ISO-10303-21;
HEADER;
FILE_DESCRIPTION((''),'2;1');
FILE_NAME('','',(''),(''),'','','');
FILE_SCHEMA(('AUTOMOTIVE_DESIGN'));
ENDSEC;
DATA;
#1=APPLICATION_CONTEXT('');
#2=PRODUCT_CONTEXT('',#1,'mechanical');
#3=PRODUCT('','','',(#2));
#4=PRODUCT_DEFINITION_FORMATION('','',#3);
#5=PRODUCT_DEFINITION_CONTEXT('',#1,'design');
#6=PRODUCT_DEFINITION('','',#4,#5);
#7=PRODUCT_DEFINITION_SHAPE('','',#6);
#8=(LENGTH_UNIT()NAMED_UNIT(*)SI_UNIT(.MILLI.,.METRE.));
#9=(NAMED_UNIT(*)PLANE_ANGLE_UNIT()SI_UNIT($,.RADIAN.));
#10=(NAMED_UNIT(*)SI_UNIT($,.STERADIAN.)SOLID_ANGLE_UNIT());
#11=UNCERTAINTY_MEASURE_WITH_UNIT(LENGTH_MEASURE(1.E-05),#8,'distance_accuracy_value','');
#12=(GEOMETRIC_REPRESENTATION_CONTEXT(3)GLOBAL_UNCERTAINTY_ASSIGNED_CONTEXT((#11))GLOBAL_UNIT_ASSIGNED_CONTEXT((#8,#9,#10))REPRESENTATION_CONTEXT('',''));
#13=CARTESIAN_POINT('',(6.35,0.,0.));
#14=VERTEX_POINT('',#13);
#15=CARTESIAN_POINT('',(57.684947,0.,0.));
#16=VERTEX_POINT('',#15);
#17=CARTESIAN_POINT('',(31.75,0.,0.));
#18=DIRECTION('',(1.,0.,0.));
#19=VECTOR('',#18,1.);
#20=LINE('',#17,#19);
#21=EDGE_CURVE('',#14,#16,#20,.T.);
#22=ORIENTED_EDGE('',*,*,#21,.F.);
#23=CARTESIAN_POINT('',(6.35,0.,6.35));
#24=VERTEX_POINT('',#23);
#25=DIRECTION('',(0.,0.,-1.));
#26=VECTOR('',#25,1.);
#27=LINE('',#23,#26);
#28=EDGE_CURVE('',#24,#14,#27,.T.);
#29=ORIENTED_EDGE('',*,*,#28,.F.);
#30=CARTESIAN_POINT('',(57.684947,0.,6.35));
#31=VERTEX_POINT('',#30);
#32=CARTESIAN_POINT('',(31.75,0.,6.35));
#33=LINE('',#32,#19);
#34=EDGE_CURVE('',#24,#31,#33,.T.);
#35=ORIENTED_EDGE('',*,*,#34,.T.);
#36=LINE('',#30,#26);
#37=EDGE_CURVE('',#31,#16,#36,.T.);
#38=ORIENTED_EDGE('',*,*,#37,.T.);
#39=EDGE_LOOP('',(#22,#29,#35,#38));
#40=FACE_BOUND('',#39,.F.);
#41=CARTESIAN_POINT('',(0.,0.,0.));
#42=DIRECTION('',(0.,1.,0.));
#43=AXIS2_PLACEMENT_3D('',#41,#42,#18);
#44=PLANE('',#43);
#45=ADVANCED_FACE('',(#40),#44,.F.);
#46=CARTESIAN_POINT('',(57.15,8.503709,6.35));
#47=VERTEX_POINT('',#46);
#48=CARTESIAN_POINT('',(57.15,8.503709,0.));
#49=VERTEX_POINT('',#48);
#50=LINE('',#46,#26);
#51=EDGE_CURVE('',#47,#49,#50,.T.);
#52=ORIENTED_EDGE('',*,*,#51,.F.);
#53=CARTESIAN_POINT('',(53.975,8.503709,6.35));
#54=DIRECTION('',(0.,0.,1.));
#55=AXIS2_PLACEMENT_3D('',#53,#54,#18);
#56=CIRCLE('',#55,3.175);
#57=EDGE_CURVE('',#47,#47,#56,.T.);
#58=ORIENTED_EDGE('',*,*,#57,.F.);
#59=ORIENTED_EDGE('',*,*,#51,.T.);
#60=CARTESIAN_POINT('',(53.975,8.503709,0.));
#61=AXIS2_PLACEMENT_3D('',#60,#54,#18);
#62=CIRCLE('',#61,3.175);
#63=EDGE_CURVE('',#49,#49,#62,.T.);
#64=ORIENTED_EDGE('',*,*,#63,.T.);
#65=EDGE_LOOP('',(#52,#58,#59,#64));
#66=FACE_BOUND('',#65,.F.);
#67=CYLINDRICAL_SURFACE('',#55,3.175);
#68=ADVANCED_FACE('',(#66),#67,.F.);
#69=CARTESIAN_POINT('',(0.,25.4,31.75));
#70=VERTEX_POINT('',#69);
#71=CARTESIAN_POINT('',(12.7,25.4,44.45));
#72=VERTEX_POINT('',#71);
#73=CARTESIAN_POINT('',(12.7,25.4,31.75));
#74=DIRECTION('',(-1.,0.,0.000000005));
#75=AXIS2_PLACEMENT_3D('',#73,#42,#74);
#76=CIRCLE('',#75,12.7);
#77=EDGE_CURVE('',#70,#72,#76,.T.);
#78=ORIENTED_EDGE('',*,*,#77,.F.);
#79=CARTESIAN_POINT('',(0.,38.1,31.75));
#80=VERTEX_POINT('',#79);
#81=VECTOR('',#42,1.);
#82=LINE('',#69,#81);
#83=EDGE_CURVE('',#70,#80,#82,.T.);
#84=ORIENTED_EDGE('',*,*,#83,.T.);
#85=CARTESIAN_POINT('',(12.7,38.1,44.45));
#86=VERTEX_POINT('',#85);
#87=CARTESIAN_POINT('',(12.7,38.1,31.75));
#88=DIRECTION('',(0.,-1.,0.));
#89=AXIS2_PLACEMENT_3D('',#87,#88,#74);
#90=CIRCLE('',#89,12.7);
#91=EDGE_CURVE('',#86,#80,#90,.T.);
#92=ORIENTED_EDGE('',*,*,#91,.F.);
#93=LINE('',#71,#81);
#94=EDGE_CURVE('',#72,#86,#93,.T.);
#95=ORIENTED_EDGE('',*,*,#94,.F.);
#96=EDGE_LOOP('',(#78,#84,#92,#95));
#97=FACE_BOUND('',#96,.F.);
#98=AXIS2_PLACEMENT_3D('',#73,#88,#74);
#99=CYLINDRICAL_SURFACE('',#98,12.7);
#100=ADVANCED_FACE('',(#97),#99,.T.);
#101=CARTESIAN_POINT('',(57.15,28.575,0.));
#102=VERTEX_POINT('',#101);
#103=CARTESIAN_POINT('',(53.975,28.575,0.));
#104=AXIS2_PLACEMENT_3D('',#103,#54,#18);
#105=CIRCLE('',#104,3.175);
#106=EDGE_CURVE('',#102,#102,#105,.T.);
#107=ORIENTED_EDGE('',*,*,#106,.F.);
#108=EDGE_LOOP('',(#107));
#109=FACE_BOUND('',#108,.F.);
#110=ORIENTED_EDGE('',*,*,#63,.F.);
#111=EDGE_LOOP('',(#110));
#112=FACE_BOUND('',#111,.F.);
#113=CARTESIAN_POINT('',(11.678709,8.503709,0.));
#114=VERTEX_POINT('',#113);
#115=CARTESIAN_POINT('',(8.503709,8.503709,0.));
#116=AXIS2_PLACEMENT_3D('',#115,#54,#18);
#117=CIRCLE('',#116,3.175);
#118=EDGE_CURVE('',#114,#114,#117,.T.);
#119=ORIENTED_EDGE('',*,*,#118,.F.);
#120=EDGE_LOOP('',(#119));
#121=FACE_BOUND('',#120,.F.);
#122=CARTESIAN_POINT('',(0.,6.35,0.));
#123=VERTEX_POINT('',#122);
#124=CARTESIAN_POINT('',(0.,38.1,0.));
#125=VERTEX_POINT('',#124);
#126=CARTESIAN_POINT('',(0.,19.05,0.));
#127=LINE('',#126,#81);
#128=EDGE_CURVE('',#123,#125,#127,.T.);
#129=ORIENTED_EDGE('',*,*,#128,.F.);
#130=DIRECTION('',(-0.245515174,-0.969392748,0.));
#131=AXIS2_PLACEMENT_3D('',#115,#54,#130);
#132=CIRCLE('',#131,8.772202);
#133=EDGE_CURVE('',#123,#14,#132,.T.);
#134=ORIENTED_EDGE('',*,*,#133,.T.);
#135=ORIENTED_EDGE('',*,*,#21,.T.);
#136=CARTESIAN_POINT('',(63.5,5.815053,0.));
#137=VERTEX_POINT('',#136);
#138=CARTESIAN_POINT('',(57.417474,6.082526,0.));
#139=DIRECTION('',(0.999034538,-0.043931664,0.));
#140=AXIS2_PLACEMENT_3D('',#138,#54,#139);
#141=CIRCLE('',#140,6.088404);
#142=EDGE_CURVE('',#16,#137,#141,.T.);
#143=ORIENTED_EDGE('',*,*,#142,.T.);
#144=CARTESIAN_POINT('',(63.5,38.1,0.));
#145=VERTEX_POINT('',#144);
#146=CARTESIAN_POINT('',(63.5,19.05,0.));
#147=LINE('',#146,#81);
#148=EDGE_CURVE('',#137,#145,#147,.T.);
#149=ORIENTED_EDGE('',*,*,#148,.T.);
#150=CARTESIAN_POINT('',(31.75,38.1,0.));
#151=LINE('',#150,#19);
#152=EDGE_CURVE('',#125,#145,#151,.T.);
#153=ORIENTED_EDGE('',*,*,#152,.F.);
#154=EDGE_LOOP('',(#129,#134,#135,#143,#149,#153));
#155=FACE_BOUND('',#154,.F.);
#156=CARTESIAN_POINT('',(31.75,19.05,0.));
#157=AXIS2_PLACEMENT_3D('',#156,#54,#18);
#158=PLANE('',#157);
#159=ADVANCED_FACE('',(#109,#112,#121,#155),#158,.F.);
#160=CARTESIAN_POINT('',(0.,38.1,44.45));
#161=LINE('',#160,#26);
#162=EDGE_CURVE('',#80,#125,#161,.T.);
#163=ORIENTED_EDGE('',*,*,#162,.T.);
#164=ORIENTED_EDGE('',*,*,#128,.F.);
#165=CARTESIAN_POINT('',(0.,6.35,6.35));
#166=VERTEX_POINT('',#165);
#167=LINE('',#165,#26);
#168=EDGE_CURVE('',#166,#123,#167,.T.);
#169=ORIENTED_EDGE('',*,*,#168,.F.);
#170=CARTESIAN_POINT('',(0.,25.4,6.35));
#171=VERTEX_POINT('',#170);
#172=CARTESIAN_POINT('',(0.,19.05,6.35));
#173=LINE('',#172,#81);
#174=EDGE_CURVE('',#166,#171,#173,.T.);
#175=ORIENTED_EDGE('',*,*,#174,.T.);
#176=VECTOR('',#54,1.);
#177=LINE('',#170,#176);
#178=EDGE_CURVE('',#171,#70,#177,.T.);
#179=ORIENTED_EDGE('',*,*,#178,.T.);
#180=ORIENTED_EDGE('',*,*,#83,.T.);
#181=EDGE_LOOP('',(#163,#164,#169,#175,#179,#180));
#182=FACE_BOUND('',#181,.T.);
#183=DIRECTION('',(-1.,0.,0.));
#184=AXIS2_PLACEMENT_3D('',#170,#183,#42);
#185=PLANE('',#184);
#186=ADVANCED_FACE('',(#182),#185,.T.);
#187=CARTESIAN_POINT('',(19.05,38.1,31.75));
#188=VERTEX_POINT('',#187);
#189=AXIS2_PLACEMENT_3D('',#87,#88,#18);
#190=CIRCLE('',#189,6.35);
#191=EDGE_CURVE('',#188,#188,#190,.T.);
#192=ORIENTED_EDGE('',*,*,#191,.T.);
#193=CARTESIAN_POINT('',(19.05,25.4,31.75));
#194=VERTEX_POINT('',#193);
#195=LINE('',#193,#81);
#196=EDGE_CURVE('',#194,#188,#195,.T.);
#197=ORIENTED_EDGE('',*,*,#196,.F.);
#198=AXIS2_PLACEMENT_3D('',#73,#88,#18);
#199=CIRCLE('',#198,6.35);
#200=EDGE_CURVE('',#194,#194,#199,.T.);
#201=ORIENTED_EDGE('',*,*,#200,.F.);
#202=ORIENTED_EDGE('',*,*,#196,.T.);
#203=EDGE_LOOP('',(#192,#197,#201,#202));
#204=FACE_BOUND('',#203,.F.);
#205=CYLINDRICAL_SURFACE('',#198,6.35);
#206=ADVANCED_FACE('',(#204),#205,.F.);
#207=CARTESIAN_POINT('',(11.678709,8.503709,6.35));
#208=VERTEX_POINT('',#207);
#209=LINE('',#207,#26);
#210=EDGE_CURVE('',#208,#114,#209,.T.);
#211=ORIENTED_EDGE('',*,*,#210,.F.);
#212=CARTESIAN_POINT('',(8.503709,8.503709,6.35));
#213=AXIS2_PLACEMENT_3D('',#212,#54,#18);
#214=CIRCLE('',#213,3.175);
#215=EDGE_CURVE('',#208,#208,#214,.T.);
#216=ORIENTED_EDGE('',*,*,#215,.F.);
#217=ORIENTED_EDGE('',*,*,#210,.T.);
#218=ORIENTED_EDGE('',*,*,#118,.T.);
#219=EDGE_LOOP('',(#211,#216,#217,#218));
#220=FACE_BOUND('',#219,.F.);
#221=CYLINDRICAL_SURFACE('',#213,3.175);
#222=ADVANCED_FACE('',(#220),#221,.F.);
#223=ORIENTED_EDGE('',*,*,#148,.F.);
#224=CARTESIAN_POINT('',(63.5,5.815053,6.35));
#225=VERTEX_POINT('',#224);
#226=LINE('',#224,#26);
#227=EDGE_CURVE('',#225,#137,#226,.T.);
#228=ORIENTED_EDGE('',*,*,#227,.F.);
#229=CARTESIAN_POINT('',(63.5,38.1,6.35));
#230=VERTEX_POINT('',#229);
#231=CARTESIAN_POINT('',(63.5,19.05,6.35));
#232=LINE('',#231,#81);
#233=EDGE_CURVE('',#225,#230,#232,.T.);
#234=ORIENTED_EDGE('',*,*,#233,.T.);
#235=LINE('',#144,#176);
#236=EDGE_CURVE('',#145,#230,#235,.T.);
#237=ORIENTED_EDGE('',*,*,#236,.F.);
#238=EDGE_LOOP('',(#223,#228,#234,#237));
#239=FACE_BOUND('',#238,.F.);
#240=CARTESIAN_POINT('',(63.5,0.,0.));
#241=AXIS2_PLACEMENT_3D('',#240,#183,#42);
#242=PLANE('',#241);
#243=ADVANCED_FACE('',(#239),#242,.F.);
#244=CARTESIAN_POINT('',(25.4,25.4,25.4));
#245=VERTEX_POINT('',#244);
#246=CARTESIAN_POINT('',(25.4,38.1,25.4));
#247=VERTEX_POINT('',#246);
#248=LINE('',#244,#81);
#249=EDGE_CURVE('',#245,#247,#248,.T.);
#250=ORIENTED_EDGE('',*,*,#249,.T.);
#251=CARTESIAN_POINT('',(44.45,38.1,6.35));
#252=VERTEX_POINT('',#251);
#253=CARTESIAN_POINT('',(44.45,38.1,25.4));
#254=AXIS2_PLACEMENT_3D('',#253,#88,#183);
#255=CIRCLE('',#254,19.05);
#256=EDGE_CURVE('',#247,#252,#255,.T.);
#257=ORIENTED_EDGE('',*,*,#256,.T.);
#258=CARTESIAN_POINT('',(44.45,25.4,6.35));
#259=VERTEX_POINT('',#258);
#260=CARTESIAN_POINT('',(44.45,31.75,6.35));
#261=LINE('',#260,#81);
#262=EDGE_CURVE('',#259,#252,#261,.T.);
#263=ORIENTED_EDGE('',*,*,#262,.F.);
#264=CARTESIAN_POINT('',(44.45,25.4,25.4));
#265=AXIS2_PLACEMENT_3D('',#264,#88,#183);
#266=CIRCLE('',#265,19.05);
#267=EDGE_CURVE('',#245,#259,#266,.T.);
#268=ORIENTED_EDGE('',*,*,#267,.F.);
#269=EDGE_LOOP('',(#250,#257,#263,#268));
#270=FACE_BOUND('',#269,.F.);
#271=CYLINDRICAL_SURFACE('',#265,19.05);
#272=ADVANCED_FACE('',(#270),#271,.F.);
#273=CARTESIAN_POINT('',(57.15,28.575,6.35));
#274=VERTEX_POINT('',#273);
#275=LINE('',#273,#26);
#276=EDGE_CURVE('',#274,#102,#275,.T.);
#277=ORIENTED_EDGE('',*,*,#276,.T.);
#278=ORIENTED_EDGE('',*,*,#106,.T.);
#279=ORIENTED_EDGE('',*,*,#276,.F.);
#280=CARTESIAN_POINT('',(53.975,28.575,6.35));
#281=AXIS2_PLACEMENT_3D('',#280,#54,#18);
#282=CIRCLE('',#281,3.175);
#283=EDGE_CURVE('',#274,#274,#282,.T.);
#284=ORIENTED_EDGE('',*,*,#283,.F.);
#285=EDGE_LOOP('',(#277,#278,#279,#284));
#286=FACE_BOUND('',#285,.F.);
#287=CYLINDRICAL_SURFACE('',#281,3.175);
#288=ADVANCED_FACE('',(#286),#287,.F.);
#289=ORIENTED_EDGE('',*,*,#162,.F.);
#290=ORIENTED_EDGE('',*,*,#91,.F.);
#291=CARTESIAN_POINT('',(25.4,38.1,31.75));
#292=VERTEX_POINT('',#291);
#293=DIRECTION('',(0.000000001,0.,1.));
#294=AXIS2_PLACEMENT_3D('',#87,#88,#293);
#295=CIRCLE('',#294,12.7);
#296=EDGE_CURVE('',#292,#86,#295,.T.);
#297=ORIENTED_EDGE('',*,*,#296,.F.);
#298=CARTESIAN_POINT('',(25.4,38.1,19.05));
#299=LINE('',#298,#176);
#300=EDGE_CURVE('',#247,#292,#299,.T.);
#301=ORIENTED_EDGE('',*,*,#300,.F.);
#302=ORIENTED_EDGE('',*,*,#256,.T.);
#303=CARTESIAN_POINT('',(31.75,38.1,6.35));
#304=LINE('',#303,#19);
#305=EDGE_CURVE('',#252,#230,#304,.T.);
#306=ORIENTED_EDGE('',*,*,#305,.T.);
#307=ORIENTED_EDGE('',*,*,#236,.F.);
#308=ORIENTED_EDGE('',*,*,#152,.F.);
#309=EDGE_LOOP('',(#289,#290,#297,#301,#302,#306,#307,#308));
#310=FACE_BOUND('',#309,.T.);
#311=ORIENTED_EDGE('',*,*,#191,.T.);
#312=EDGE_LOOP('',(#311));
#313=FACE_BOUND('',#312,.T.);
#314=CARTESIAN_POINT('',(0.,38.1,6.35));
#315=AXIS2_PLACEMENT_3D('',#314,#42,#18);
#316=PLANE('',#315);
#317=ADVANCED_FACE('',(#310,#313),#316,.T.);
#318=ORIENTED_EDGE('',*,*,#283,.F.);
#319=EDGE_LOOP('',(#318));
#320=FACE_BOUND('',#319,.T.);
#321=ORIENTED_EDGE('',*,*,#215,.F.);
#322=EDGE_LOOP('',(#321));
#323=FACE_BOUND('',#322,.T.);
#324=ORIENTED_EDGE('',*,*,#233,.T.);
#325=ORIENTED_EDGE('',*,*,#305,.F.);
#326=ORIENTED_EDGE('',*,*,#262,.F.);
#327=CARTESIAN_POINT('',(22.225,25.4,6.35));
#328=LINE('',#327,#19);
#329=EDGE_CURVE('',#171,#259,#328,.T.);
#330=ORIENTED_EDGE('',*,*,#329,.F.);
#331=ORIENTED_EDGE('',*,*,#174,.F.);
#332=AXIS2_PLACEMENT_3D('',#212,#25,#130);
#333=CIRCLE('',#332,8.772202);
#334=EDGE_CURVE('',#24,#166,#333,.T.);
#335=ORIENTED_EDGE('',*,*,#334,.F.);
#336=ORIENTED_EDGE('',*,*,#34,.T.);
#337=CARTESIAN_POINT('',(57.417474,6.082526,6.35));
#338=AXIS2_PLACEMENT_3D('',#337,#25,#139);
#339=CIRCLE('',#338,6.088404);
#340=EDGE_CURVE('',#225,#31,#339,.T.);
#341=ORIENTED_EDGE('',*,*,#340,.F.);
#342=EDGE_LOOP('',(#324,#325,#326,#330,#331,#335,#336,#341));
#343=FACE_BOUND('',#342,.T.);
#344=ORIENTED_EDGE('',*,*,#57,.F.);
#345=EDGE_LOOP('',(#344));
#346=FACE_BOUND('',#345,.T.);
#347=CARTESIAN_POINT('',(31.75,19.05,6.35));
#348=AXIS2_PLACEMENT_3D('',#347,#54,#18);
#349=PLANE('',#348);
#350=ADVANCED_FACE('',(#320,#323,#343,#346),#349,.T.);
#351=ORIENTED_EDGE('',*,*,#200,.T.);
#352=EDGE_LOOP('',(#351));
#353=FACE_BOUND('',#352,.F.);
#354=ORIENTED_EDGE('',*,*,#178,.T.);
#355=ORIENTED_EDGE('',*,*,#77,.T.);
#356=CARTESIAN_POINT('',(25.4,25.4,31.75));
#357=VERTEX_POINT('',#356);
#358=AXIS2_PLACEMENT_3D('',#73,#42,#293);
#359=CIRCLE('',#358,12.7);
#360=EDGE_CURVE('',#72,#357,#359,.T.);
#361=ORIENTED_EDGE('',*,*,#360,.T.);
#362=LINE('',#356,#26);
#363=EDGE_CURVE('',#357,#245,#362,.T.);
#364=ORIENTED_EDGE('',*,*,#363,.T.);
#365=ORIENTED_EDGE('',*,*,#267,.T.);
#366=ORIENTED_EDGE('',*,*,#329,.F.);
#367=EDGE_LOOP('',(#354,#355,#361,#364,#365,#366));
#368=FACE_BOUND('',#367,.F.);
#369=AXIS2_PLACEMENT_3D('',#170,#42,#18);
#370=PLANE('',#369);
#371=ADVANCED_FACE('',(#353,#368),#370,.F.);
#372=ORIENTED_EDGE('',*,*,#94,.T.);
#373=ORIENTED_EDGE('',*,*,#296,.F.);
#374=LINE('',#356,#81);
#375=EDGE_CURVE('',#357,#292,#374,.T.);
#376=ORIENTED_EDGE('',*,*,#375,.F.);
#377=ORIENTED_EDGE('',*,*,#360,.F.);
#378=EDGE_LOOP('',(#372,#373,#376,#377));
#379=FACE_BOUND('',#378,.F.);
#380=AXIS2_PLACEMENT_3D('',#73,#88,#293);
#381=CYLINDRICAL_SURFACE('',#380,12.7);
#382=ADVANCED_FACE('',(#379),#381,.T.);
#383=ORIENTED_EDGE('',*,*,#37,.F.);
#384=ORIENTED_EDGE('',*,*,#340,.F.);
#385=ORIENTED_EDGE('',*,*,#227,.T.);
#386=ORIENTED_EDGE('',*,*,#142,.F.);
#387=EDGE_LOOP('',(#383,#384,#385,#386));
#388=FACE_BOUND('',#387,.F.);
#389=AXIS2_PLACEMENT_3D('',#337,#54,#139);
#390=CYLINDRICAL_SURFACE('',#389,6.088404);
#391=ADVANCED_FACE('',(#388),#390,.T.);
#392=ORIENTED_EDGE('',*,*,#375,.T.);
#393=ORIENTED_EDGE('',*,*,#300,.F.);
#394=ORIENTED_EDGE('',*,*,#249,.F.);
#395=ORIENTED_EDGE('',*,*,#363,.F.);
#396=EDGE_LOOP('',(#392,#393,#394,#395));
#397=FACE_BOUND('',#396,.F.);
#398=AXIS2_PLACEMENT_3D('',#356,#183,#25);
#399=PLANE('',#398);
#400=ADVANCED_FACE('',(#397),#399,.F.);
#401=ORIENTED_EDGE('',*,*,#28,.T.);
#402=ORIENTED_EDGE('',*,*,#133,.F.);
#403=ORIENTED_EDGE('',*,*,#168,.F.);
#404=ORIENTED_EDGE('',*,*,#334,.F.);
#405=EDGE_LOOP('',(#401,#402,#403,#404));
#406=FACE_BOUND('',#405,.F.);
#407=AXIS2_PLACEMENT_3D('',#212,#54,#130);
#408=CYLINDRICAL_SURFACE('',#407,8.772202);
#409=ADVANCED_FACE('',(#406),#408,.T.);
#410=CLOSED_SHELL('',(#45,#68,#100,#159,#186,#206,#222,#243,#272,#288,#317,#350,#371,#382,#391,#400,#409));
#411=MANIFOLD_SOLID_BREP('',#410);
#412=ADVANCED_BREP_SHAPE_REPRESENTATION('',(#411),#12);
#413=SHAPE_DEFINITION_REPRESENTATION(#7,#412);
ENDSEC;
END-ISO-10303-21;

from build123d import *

# Parameters (mm, degrees)
F0_W      = 63.5
F0_H      = 38.1
F1_DEPTH  = 6.35
F2_W      = 44.45
F2_H      = 12.7
F3_DEPTH  = 38.1
F4_R      = 6.35
F5_DEPTH  = 25.4
F7_DEPTH  = 25.4
F10_DEPTH = 25.4
F12_DEPTH = 25.4
F13_R     = 3.175
F14_DEPTH = 25.4
F15_DEPTH = 25.4


# Not quite as in the source:
# - a feature names something its author has since deleted; it is built from what else it names


with BuildPart() as f1:
    # F0 (on Top) → F1 (new body)
    with BuildSketch(Plane.XY):
        with Locations((31.75, 19.05)):
            Rectangle(F0_W, F0_H)
    extrude(amount=F1_DEPTH)

    # F2 (on face) → F3 (join)
    with BuildSketch(Plane.XY.offset(6.35)):
        with Locations((22.225, 31.75)):
            Rectangle(F2_W, F2_H)
    extrude(amount=F3_DEPTH)

    # F4 (on face) → F5 (cut)
    with BuildSketch(Plane.XZ.offset(-25.4)):
        with Locations((12.7, 31.75)):
            Circle(F4_R)
    extrude(amount=-F5_DEPTH, mode=Mode.SUBTRACT)

    # F6 (on face) → F7 (cut)
    with BuildSketch(Plane.XZ.offset(-25.4)):
        with BuildLine():
            ThreePointArc((0, 31.7500000601), (3.7197439043, 40.7302561464), (12.7000000115, 44.45))
            Line((12.7000000115, 44.45), (0, 44.45))
            Line((0, 44.45), (0, 31.7500000601))
        make_face()
    extrude(amount=-F7_DEPTH, mode=Mode.SUBTRACT)

    # F9 (on face) → F10 (cut)
    with BuildSketch(Plane.XY.offset(6.35)):
        with BuildLine():
            ThreePointArc((6.35, 0), (2.3008253722, 2.3008253722), (0, 6.35))
            Line((0, 6.35), (0, 0))
            Line((0, 0), (6.35, 0))
        make_face()
    extrude(amount=-F10_DEPTH, mode=Mode.SUBTRACT)

    # F11 (on face) → F12 (cut)
    with BuildSketch(Plane.XY.offset(6.35)):
        with BuildLine():
            ThreePointArc((63.5, 5.8150525234), (61.7226257638, 1.7773742362), (57.6849474766, 0))
            Line((57.6849474766, 0), (63.5, 0))
            Line((63.5, 0), (63.5, 5.8150525234))
        make_face()
    extrude(amount=-F12_DEPTH, mode=Mode.SUBTRACT)

    # F13 (on face) → F14 (cut)
    with BuildSketch(Plane.XY.offset(6.35)):
        with Locations((53.975, 28.575)):
            Circle(F13_R)
        with Locations((53.975, 8.5037086033)):
            Circle(F13_R)
        with Locations((8.5037086033, 8.5037086033)):
            Circle(F13_R)
    extrude(amount=-F14_DEPTH, mode=Mode.SUBTRACT)

    # F8 (on face) → F15 (cut)
    with BuildSketch(Plane.XZ.offset(-25.4)):
        with BuildLine():
            ThreePointArc((12.7000000115, 44.45), (21.6802561251, 40.730256117), (25.4, 31.75))
            Line((25.4, 31.75), (25.4, 25.4))
            ThreePointArc((25.4, 25.4), (30.9796158184, 11.9296158184), (44.45, 6.35))
            Line((44.45, 6.35), (44.45, 44.45))
            Line((44.45, 44.45), (12.7000000115, 44.45))
        make_face()
    extrude(amount=-F15_DEPTH, mode=Mode.SUBTRACT)


solid = f1.part
